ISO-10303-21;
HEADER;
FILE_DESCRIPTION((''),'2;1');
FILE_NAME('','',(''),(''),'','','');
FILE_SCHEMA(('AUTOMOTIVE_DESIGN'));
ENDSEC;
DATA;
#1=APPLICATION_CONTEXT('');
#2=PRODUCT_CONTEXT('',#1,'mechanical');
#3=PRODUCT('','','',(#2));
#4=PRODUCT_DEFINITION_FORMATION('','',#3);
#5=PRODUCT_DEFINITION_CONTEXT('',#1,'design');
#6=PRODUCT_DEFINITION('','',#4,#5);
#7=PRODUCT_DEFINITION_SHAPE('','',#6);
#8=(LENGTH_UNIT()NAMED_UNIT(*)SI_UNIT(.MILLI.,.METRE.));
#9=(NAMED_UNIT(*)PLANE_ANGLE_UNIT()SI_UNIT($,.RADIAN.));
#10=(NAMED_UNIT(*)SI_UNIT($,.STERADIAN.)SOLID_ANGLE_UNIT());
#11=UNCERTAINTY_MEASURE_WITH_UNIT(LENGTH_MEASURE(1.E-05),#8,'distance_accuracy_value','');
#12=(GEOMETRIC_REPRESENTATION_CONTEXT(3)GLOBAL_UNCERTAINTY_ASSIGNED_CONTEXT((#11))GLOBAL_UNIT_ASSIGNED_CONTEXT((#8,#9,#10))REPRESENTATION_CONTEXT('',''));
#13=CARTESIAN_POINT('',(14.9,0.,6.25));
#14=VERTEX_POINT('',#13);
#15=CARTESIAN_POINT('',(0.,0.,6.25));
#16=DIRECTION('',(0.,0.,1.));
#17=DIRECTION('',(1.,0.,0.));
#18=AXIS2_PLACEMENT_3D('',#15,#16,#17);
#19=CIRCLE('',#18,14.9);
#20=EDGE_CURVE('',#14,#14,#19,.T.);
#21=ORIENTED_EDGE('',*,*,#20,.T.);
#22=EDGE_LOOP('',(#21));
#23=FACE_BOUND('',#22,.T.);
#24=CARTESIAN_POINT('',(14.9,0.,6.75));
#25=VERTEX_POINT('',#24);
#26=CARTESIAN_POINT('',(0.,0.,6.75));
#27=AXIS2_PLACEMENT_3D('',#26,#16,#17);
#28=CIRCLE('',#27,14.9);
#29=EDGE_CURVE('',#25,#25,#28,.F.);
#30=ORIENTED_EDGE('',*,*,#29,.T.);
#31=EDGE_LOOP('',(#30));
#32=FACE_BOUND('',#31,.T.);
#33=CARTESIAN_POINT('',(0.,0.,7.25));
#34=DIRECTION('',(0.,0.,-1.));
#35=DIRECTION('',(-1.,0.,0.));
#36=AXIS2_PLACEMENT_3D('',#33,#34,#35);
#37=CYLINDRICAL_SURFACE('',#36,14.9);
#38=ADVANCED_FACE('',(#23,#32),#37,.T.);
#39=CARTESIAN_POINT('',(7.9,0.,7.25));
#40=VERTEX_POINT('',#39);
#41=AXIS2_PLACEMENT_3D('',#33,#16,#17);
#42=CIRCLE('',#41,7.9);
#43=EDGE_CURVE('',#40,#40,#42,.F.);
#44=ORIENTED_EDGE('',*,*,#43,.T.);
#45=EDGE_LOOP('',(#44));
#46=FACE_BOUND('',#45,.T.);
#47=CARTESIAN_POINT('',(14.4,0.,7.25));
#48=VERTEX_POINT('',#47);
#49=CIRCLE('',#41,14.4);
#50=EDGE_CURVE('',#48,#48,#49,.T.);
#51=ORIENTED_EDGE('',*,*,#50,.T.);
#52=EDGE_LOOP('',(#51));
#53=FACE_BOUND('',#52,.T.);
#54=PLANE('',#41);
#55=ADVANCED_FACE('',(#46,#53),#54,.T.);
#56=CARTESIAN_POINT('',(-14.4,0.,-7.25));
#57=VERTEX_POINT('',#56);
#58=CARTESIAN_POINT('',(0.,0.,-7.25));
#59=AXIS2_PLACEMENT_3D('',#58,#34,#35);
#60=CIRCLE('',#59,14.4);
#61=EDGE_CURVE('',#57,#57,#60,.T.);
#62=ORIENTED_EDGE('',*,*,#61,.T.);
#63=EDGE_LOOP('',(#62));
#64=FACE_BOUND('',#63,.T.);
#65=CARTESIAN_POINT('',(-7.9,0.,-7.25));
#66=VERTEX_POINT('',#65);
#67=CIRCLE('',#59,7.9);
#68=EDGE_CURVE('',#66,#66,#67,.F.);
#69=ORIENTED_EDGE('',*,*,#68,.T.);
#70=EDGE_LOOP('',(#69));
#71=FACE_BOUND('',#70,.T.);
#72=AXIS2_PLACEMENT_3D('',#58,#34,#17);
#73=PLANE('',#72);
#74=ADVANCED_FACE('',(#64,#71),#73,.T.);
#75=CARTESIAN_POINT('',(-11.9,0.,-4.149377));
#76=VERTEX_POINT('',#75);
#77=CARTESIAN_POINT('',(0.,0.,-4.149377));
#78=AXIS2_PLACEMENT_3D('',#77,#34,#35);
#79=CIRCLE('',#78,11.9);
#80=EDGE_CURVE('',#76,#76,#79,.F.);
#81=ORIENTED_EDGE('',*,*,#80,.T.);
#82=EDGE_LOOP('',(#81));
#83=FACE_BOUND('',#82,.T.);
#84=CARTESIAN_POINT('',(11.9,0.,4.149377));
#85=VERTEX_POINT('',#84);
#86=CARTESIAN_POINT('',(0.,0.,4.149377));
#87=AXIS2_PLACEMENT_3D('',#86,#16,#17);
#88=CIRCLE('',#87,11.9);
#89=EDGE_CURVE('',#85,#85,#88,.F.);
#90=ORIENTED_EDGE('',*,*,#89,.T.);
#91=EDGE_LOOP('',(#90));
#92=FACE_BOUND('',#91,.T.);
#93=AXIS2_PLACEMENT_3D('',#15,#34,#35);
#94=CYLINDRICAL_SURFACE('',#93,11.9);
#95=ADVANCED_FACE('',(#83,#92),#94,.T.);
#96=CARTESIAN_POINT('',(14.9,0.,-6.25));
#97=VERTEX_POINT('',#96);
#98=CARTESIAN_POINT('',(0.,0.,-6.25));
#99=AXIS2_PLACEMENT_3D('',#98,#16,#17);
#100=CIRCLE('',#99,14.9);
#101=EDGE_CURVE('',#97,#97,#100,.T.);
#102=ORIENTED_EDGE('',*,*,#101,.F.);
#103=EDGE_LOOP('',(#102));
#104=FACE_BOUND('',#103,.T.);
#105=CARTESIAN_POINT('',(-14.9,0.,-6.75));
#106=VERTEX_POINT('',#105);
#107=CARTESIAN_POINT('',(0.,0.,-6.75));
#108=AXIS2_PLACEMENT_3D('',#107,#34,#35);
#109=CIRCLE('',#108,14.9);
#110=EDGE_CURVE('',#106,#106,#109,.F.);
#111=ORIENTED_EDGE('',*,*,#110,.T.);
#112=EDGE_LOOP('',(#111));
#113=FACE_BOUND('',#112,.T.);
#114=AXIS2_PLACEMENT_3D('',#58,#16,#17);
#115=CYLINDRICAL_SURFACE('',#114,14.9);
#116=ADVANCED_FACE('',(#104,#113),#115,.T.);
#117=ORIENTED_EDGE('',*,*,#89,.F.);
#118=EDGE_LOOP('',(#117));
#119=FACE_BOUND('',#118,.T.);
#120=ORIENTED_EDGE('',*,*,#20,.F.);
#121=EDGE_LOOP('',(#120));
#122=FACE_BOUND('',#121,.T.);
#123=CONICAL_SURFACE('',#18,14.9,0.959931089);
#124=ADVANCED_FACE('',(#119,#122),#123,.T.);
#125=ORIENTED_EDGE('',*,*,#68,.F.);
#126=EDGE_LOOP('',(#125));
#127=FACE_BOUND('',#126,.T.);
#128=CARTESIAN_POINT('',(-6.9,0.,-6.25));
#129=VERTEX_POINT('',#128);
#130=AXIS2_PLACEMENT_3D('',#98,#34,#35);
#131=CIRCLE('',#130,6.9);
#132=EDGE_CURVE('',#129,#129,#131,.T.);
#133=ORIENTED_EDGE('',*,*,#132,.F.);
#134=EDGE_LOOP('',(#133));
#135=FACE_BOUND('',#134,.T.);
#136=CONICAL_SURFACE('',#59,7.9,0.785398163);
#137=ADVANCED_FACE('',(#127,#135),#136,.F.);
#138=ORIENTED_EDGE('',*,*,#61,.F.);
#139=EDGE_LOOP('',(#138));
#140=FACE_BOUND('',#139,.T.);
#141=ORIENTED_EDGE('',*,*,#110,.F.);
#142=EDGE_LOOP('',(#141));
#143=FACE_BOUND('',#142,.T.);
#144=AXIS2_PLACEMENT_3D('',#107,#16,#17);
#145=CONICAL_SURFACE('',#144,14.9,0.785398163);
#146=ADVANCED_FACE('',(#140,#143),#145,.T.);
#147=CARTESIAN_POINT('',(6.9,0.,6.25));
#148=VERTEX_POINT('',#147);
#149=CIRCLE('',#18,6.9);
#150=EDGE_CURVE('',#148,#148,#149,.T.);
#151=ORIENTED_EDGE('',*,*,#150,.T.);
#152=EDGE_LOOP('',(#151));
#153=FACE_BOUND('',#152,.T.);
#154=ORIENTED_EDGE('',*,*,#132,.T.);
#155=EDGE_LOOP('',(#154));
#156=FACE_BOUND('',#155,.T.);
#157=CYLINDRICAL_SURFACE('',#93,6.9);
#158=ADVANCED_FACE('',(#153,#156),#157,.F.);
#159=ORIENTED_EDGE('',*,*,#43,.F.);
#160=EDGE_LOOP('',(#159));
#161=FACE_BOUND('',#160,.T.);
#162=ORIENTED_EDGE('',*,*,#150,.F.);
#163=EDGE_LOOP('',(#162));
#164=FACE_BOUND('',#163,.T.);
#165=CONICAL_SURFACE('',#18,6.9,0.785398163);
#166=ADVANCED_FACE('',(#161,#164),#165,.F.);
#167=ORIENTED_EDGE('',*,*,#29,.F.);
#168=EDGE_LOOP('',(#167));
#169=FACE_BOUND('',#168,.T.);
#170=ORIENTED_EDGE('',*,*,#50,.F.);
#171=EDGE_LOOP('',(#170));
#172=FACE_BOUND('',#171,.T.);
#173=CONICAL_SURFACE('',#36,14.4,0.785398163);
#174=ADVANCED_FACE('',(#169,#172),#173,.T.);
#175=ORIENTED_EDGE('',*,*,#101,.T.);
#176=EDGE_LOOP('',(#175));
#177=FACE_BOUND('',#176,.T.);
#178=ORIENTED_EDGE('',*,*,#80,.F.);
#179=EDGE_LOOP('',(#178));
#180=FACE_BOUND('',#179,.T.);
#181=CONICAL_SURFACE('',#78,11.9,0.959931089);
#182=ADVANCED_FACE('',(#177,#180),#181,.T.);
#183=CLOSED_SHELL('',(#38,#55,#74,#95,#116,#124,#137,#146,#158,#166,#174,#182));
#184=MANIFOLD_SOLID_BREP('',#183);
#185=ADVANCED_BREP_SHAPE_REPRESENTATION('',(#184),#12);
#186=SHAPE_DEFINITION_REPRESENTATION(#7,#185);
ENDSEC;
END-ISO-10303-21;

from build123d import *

# Parameters (mm, degrees)
SKETCH1_R           = 11.9
SKETCH1_R_2         = 6.9
BOSS_EXTRUDE1_DEPTH = 6.25
SKETCH2_R           = 14.9
SKETCH2_R_2         = 6.9
BOSS_EXTRUDE2_DEPTH = 1
CHAMFER1_SIZE       = 2.100622615
CHAMFER1_SIZE_2     = 3
CHAMFER2_SIZE       = 0.5
CHAMFER3_SIZE       = 1


with BuildPart() as part:
    # Sketch1 → Boss-Extrude1 (new, symmetric)
    with BuildSketch(Plane.XY):
        Circle(SKETCH1_R)
        Circle(SKETCH1_R_2, mode=Mode.SUBTRACT)
    extrude(amount=BOSS_EXTRUDE1_DEPTH, both=True)

    # Sketch2 → Boss-Extrude2 (add)
    with BuildSketch(Plane.XY.offset(6.25)):
        Circle(SKETCH2_R)
        Circle(SKETCH2_R_2, mode=Mode.SUBTRACT)
    boss_extrude2 = extrude(amount=BOSS_EXTRUDE2_DEPTH)

    # Mirror1: Boss-Extrude2 across plane
    add(boss_extrude2.mirror(Plane.XY))

    # Chamfer1
    # the kernel refuses this chamfer: 3, 2.100622615 mm, written as the material it adds along each edge
    with BuildSketch(Plane(origin=(0, 0, -6.25), x_dir=(1, 0, 0), z_dir=(0, -1, 0))) as chamfer1_piece_1_section:
        Polygon((11.9, CHAMFER1_SIZE), (11.9 + CHAMFER1_SIZE_2, 0), (11.9, 0), align=None)
    chamfer1_piece_1 = revolve(axis=Axis((0, 0, -6.25), (0, 0, 1)), mode=Mode.PRIVATE)
    chamfer1_piece_1 = chamfer1_piece_1 & Plane(origin=(0, 0, -5.219213632), x_dir=(1, 0, 0), z_dir=(0, 0, 1)) * Cylinder(14.9, 60, mode=Mode.PRIVATE)
    add(chamfer1_piece_1)
    with BuildSketch(Plane(origin=(0, 0, 6.25), x_dir=(1, 0, 0), z_dir=(0, -1, 0))) as chamfer1_piece_2_section:
        Polygon((11.9, -CHAMFER1_SIZE), (11.9 + CHAMFER1_SIZE_2, 0), (11.9, 0), align=None)
    chamfer1_piece_2 = revolve(axis=Axis((0, 0, 6.25), (0, 0, 1)), mode=Mode.PRIVATE)
    chamfer1_piece_2 = chamfer1_piece_2 & Plane(origin=(0, 0, 5.219213632), x_dir=(1, 0, 0), z_dir=(0, 0, -1)) * Cylinder(14.9, 60, mode=Mode.PRIVATE)
    add(chamfer1_piece_2)

    # Chamfer2
    chamfer2_edges = [part.edges().sort_by_distance(p)[0] for p in [
        (-14.9, 0, 7.25),
        (-14.9, 0, -7.25),
    ]]
    chamfer(chamfer2_edges, length=CHAMFER2_SIZE)

    # Chamfer3
    chamfer3_edges = [part.edges().sort_by_distance(p)[0] for p in [
        (-6.9, 0, 7.25),
        (-6.9, 0, -7.25),
    ]]
    chamfer(chamfer3_edges, length=CHAMFER3_SIZE)


solid = part.part
